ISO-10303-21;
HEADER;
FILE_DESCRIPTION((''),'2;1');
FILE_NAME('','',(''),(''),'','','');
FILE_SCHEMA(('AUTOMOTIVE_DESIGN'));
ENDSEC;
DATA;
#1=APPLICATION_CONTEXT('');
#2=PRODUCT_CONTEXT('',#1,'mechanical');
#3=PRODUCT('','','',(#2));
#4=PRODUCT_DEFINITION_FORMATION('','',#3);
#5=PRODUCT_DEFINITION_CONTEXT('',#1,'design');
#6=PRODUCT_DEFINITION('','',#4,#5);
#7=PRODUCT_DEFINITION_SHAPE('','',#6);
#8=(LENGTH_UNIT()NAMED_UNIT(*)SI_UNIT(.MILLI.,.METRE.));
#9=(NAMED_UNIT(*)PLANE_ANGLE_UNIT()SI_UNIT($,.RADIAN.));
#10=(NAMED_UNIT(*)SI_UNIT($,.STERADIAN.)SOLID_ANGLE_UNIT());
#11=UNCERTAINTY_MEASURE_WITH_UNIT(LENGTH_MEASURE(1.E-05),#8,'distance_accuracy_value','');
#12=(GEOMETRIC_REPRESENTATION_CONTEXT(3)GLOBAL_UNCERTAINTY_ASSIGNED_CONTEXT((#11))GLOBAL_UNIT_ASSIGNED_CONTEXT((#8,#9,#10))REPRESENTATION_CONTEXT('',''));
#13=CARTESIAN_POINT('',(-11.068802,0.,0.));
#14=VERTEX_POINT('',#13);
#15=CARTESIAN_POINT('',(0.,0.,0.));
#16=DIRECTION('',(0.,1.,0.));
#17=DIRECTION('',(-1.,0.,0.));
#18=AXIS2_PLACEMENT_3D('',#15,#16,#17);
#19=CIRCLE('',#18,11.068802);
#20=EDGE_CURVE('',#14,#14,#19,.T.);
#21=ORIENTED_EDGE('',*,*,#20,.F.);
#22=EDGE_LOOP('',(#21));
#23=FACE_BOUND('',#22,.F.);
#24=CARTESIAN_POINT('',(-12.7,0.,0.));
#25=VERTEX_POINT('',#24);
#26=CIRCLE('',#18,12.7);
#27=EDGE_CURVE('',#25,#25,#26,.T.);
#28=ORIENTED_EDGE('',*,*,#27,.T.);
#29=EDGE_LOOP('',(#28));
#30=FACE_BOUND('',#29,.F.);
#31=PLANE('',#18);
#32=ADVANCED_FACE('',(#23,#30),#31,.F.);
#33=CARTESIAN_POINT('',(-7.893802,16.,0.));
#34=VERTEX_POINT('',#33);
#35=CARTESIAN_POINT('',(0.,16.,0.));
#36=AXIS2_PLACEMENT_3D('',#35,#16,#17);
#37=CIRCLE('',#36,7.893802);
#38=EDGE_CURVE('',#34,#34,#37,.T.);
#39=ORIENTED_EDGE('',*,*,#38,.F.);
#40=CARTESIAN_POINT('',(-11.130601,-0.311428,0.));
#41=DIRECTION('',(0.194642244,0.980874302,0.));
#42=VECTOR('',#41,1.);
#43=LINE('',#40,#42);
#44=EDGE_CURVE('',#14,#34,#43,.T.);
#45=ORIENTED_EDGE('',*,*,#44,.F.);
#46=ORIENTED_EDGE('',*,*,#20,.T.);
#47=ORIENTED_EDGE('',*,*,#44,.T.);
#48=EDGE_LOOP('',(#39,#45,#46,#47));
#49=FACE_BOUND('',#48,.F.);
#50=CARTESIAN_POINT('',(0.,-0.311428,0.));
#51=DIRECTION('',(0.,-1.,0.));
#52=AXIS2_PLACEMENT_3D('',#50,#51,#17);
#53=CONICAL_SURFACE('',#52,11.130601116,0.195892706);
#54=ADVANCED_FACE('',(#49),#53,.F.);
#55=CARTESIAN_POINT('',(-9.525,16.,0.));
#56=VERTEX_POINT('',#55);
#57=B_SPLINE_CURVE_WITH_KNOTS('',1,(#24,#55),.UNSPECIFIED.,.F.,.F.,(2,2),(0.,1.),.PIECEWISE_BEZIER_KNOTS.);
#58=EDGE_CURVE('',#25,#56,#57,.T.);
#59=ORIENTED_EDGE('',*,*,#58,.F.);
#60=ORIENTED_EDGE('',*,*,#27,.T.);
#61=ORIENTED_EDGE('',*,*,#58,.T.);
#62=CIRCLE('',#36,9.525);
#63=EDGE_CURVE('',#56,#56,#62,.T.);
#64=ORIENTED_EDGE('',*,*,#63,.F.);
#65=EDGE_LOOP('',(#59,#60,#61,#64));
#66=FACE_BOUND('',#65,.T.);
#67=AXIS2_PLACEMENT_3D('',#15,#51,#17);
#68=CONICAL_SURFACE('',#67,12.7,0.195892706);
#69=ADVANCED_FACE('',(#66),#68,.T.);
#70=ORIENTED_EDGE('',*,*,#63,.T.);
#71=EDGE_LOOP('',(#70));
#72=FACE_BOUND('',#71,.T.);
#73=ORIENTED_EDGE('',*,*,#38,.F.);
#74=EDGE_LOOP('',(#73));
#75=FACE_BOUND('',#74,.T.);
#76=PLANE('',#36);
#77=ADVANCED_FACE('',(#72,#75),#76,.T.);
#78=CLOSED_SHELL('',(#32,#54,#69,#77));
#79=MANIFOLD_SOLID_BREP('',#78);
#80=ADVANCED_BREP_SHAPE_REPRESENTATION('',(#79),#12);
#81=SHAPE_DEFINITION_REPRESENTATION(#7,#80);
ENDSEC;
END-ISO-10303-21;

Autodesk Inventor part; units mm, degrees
ref_plane "YZ Plane" through (0, 0, 0) normal (1, 0, 0) x (0, 1, 0)
ref_plane "XY Plane" through (0, 0, 0) normal (0, 0, 1) x (1, 0, 0)
sketch "Szkic6" plane through (0, 0, 0) normal (0, 1, 0) x (-1, 0, 0)
  circle A0 centre (0, 0) radius 12.7
  dimension "d33" = 25.4
ref_plane "Płaszczyzna konstrukcyjna1" through (0, 16, 0) normal (0, 1, 0) x (-1, 0, 0)
sketch "Szkic7" plane through (0, 16, 0) normal (0, 1, 0) x (-1, 0, 0)
  circle A0 centre (0, 0) radius 9.525
  dimension "d35" = 19.05
loft "Wyciągnięcie złożone1" add profiles "Szkic6", "Szkic7"
shell "Skorupa1" thickness 1.6 removed faces 2 at (2.8113, 16, 0.0442) at (3.6254, 0, -0.9542)
equation "\"d33\" = OD1"
equation "\"d35\" = OD2"
equation "\"d52\" = THK"
equation "\"SzerokośćGięciaPodcięcia\" = Grubość"
equation "\"RozmiarPodcięciaNarożnika\" = 4 * Grubość"
equation "\"PromieńPrzejścia\" = PromieńGięcia"
equation "\"Rozmiar_promienia_Jacobiego\" = PromieńGięcia"
equation "\"Wielk_odstępu\" = Grubość"
equation "\"d2\" = PromieńGięcia"
equation "\"d23\" = PromieńGięcia"
equation "\"OD1\" = 25.4"
equation "\"OD2\" = 19.05"
equation "\"L\" = 16"
equation "\"THK\" = 1.6"
equation "\"d34\" = L"
equation "\"Grubość\" = 1.5"
equation "\"PromieńGięcia\" = 3"
properties part number "Redukcja symetryczna Ø25,4x19,05x1,6 L=16" material "304"
